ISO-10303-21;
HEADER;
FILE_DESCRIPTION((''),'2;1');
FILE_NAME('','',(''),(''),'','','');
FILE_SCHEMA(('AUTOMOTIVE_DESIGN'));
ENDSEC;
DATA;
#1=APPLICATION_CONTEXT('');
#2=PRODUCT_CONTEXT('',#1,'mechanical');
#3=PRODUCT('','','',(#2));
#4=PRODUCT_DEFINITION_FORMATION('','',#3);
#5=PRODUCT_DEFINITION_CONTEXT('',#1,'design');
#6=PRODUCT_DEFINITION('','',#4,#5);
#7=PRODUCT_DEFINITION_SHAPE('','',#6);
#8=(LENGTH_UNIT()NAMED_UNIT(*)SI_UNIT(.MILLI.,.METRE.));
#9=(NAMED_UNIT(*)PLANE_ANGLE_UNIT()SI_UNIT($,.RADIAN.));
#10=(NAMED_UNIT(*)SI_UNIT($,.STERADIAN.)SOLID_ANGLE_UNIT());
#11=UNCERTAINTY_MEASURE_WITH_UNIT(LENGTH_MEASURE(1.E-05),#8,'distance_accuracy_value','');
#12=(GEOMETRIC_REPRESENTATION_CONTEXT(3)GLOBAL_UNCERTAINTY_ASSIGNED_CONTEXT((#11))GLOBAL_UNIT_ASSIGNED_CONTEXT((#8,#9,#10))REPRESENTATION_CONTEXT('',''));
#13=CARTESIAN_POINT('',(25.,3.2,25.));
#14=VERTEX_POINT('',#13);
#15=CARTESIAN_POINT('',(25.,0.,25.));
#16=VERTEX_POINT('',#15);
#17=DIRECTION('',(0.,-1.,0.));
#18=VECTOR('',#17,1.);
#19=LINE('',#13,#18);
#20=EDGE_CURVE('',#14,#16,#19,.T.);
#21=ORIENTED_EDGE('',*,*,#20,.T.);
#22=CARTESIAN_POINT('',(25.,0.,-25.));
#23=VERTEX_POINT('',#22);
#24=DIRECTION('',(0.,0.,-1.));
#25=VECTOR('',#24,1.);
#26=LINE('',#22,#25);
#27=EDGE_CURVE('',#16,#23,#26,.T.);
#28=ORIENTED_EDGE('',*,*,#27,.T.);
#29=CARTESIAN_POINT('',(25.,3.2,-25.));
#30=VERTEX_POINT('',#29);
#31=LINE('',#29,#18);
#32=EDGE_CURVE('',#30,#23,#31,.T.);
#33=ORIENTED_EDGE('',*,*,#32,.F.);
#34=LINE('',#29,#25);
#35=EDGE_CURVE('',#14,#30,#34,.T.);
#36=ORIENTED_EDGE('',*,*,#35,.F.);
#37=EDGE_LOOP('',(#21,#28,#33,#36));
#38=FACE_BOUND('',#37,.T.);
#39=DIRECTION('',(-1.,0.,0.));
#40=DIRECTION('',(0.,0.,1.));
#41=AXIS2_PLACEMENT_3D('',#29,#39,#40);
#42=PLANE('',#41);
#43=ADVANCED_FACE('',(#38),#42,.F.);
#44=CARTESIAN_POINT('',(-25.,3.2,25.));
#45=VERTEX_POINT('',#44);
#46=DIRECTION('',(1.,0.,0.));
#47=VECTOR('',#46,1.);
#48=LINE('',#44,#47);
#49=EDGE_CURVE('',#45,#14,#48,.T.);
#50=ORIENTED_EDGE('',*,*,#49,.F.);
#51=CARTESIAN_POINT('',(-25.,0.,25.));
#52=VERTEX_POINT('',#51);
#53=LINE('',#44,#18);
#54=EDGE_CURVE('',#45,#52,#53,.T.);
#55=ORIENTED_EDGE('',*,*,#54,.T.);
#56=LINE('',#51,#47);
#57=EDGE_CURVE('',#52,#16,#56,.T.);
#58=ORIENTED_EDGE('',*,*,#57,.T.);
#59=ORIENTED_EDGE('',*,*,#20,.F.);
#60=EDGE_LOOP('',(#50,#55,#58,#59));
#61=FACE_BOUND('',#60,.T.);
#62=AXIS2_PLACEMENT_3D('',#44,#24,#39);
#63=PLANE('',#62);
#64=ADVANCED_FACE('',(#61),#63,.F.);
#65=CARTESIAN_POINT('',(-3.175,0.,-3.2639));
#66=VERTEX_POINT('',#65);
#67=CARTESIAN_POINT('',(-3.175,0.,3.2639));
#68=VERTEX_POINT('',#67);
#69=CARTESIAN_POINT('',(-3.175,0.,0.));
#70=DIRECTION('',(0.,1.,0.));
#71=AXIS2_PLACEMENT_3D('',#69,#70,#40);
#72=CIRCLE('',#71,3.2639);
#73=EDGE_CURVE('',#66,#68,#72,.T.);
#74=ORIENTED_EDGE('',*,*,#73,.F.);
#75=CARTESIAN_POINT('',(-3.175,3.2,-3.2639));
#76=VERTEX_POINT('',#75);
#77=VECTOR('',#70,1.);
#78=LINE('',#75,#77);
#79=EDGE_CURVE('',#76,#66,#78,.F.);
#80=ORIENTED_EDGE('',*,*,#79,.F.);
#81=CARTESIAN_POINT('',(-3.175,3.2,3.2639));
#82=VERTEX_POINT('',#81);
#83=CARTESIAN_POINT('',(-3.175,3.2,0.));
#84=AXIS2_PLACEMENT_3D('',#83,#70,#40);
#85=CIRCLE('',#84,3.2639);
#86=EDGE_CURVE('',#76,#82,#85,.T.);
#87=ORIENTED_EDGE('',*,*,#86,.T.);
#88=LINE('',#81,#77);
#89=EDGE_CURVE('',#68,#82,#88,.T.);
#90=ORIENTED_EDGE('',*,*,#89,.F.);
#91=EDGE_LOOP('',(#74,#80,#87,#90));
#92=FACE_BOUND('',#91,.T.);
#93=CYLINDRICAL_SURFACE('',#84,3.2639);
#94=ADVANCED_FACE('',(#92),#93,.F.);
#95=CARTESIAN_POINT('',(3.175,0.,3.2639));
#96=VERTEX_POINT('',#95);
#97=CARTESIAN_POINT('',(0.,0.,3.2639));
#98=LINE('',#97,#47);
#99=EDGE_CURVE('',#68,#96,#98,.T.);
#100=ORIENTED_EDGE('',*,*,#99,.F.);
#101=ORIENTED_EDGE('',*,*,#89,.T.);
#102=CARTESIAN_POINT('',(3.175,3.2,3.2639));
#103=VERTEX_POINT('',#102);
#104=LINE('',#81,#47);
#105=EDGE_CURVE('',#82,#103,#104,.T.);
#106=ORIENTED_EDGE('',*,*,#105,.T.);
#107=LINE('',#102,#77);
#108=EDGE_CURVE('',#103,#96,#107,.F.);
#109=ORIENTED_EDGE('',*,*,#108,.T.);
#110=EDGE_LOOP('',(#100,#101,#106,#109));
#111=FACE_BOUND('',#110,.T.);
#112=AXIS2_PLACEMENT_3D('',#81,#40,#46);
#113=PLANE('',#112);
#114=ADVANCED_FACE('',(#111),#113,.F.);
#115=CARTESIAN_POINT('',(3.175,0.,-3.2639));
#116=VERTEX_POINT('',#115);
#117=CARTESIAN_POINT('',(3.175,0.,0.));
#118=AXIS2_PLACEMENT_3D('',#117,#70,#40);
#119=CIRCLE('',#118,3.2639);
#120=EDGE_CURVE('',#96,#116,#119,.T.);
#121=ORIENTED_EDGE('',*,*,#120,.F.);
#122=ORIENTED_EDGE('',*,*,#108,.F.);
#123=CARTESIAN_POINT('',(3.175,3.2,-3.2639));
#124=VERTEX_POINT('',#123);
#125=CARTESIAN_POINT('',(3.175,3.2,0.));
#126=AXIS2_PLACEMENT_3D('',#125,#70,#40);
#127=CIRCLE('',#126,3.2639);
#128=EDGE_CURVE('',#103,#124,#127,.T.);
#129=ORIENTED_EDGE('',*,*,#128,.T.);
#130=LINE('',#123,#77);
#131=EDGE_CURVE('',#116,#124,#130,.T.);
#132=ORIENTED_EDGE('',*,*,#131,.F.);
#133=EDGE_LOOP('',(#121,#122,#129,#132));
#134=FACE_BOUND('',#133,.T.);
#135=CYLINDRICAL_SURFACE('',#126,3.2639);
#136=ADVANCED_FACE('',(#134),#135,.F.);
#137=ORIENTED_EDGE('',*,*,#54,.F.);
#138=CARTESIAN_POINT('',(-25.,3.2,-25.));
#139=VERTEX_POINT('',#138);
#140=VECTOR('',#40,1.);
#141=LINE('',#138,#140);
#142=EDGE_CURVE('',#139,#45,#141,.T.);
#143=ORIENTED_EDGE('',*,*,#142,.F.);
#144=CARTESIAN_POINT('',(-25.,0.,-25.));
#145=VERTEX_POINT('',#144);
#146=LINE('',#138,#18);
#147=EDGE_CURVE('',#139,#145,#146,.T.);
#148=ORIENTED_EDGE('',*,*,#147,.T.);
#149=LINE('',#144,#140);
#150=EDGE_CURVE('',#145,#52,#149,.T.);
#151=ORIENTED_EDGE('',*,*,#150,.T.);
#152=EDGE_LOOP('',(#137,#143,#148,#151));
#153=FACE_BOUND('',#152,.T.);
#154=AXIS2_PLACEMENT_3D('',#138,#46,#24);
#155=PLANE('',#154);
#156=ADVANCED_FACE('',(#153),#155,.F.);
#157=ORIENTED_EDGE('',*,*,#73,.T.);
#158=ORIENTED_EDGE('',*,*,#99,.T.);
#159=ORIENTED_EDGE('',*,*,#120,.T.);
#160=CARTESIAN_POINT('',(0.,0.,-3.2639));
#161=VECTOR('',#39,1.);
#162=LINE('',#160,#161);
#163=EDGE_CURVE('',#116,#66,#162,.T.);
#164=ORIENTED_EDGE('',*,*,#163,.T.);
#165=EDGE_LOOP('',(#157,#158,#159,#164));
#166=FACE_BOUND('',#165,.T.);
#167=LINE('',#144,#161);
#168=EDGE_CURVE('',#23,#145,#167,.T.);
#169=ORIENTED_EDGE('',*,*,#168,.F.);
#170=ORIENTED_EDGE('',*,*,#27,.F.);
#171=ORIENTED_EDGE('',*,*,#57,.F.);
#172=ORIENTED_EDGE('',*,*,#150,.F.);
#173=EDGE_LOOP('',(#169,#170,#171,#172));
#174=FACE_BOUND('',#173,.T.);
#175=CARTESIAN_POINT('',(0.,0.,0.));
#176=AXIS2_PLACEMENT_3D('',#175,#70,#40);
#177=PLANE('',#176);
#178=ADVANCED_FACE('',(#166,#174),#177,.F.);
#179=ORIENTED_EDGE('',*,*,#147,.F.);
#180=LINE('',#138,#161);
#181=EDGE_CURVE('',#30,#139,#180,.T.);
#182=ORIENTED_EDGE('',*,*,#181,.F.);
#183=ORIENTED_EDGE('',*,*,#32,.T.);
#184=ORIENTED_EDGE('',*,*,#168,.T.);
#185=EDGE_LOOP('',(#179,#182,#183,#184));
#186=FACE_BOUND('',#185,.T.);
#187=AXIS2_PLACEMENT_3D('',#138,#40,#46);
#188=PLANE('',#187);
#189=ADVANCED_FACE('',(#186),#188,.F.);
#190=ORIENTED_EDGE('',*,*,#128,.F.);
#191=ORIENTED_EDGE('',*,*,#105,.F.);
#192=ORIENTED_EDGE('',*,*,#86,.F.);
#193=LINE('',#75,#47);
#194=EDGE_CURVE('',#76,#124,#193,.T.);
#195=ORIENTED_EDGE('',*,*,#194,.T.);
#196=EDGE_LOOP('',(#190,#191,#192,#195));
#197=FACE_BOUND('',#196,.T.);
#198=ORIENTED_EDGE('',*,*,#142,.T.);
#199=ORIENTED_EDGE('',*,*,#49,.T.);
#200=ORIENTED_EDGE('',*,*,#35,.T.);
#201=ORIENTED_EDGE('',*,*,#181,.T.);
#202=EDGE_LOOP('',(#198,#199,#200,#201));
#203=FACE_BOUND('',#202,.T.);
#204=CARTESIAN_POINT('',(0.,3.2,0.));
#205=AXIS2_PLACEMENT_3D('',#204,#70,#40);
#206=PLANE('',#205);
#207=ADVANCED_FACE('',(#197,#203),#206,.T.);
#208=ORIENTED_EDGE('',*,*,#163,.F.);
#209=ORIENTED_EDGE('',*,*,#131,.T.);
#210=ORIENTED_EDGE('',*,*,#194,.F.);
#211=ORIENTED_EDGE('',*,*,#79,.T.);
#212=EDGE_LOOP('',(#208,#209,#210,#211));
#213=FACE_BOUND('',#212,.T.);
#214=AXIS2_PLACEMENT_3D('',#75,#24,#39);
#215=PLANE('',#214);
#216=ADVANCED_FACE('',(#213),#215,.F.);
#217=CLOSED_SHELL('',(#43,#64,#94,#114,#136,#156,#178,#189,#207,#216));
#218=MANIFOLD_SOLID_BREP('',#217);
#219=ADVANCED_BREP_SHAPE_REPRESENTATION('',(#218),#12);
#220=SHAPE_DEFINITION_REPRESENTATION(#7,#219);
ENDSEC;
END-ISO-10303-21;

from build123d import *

# Parameters (mm, degrees)
SKETCH1_W                   = 50
SKETCH1_H                   = 50
BOSS_EXTRUDE1_DEPTH         = 3.2
F_1_4_CLEARANCE_SLOT2_DEPTH = 3.2


# Read off the part's stored shape, not the designer's step: 1/4 Clearance Slot2
with BuildPart() as part:
    # Sketch1 → Boss-Extrude1 (new body)
    with BuildSketch(Plane(origin=(0, 0, 0), x_dir=(1, 0, 0), z_dir=(0, 1, 0))):
        Rectangle(SKETCH1_W, SKETCH1_H)
    extrude(amount=BOSS_EXTRUDE1_DEPTH)

    # 1/4 Clearance Slot2 outline → 1/4 Clearance Slot2 (cut)
    with BuildSketch(Plane(origin=(0, 0, 0), x_dir=(1, 0, 0), z_dir=(0, 1, 0))):
        with BuildLine():
            Line((-3.175, -3.2639), (3.175, -3.2639))
            ThreePointArc((3.175, -3.2639), (6.4389, 0), (3.175, 3.2639))
            Line((3.175, 3.2639), (-3.175, 3.2639))
            ThreePointArc((-3.175, 3.2639), (-6.4389, 0), (-3.175, -3.2639))
        make_face()
    extrude(amount=F_1_4_CLEARANCE_SLOT2_DEPTH, mode=Mode.SUBTRACT)


solid = part.part
